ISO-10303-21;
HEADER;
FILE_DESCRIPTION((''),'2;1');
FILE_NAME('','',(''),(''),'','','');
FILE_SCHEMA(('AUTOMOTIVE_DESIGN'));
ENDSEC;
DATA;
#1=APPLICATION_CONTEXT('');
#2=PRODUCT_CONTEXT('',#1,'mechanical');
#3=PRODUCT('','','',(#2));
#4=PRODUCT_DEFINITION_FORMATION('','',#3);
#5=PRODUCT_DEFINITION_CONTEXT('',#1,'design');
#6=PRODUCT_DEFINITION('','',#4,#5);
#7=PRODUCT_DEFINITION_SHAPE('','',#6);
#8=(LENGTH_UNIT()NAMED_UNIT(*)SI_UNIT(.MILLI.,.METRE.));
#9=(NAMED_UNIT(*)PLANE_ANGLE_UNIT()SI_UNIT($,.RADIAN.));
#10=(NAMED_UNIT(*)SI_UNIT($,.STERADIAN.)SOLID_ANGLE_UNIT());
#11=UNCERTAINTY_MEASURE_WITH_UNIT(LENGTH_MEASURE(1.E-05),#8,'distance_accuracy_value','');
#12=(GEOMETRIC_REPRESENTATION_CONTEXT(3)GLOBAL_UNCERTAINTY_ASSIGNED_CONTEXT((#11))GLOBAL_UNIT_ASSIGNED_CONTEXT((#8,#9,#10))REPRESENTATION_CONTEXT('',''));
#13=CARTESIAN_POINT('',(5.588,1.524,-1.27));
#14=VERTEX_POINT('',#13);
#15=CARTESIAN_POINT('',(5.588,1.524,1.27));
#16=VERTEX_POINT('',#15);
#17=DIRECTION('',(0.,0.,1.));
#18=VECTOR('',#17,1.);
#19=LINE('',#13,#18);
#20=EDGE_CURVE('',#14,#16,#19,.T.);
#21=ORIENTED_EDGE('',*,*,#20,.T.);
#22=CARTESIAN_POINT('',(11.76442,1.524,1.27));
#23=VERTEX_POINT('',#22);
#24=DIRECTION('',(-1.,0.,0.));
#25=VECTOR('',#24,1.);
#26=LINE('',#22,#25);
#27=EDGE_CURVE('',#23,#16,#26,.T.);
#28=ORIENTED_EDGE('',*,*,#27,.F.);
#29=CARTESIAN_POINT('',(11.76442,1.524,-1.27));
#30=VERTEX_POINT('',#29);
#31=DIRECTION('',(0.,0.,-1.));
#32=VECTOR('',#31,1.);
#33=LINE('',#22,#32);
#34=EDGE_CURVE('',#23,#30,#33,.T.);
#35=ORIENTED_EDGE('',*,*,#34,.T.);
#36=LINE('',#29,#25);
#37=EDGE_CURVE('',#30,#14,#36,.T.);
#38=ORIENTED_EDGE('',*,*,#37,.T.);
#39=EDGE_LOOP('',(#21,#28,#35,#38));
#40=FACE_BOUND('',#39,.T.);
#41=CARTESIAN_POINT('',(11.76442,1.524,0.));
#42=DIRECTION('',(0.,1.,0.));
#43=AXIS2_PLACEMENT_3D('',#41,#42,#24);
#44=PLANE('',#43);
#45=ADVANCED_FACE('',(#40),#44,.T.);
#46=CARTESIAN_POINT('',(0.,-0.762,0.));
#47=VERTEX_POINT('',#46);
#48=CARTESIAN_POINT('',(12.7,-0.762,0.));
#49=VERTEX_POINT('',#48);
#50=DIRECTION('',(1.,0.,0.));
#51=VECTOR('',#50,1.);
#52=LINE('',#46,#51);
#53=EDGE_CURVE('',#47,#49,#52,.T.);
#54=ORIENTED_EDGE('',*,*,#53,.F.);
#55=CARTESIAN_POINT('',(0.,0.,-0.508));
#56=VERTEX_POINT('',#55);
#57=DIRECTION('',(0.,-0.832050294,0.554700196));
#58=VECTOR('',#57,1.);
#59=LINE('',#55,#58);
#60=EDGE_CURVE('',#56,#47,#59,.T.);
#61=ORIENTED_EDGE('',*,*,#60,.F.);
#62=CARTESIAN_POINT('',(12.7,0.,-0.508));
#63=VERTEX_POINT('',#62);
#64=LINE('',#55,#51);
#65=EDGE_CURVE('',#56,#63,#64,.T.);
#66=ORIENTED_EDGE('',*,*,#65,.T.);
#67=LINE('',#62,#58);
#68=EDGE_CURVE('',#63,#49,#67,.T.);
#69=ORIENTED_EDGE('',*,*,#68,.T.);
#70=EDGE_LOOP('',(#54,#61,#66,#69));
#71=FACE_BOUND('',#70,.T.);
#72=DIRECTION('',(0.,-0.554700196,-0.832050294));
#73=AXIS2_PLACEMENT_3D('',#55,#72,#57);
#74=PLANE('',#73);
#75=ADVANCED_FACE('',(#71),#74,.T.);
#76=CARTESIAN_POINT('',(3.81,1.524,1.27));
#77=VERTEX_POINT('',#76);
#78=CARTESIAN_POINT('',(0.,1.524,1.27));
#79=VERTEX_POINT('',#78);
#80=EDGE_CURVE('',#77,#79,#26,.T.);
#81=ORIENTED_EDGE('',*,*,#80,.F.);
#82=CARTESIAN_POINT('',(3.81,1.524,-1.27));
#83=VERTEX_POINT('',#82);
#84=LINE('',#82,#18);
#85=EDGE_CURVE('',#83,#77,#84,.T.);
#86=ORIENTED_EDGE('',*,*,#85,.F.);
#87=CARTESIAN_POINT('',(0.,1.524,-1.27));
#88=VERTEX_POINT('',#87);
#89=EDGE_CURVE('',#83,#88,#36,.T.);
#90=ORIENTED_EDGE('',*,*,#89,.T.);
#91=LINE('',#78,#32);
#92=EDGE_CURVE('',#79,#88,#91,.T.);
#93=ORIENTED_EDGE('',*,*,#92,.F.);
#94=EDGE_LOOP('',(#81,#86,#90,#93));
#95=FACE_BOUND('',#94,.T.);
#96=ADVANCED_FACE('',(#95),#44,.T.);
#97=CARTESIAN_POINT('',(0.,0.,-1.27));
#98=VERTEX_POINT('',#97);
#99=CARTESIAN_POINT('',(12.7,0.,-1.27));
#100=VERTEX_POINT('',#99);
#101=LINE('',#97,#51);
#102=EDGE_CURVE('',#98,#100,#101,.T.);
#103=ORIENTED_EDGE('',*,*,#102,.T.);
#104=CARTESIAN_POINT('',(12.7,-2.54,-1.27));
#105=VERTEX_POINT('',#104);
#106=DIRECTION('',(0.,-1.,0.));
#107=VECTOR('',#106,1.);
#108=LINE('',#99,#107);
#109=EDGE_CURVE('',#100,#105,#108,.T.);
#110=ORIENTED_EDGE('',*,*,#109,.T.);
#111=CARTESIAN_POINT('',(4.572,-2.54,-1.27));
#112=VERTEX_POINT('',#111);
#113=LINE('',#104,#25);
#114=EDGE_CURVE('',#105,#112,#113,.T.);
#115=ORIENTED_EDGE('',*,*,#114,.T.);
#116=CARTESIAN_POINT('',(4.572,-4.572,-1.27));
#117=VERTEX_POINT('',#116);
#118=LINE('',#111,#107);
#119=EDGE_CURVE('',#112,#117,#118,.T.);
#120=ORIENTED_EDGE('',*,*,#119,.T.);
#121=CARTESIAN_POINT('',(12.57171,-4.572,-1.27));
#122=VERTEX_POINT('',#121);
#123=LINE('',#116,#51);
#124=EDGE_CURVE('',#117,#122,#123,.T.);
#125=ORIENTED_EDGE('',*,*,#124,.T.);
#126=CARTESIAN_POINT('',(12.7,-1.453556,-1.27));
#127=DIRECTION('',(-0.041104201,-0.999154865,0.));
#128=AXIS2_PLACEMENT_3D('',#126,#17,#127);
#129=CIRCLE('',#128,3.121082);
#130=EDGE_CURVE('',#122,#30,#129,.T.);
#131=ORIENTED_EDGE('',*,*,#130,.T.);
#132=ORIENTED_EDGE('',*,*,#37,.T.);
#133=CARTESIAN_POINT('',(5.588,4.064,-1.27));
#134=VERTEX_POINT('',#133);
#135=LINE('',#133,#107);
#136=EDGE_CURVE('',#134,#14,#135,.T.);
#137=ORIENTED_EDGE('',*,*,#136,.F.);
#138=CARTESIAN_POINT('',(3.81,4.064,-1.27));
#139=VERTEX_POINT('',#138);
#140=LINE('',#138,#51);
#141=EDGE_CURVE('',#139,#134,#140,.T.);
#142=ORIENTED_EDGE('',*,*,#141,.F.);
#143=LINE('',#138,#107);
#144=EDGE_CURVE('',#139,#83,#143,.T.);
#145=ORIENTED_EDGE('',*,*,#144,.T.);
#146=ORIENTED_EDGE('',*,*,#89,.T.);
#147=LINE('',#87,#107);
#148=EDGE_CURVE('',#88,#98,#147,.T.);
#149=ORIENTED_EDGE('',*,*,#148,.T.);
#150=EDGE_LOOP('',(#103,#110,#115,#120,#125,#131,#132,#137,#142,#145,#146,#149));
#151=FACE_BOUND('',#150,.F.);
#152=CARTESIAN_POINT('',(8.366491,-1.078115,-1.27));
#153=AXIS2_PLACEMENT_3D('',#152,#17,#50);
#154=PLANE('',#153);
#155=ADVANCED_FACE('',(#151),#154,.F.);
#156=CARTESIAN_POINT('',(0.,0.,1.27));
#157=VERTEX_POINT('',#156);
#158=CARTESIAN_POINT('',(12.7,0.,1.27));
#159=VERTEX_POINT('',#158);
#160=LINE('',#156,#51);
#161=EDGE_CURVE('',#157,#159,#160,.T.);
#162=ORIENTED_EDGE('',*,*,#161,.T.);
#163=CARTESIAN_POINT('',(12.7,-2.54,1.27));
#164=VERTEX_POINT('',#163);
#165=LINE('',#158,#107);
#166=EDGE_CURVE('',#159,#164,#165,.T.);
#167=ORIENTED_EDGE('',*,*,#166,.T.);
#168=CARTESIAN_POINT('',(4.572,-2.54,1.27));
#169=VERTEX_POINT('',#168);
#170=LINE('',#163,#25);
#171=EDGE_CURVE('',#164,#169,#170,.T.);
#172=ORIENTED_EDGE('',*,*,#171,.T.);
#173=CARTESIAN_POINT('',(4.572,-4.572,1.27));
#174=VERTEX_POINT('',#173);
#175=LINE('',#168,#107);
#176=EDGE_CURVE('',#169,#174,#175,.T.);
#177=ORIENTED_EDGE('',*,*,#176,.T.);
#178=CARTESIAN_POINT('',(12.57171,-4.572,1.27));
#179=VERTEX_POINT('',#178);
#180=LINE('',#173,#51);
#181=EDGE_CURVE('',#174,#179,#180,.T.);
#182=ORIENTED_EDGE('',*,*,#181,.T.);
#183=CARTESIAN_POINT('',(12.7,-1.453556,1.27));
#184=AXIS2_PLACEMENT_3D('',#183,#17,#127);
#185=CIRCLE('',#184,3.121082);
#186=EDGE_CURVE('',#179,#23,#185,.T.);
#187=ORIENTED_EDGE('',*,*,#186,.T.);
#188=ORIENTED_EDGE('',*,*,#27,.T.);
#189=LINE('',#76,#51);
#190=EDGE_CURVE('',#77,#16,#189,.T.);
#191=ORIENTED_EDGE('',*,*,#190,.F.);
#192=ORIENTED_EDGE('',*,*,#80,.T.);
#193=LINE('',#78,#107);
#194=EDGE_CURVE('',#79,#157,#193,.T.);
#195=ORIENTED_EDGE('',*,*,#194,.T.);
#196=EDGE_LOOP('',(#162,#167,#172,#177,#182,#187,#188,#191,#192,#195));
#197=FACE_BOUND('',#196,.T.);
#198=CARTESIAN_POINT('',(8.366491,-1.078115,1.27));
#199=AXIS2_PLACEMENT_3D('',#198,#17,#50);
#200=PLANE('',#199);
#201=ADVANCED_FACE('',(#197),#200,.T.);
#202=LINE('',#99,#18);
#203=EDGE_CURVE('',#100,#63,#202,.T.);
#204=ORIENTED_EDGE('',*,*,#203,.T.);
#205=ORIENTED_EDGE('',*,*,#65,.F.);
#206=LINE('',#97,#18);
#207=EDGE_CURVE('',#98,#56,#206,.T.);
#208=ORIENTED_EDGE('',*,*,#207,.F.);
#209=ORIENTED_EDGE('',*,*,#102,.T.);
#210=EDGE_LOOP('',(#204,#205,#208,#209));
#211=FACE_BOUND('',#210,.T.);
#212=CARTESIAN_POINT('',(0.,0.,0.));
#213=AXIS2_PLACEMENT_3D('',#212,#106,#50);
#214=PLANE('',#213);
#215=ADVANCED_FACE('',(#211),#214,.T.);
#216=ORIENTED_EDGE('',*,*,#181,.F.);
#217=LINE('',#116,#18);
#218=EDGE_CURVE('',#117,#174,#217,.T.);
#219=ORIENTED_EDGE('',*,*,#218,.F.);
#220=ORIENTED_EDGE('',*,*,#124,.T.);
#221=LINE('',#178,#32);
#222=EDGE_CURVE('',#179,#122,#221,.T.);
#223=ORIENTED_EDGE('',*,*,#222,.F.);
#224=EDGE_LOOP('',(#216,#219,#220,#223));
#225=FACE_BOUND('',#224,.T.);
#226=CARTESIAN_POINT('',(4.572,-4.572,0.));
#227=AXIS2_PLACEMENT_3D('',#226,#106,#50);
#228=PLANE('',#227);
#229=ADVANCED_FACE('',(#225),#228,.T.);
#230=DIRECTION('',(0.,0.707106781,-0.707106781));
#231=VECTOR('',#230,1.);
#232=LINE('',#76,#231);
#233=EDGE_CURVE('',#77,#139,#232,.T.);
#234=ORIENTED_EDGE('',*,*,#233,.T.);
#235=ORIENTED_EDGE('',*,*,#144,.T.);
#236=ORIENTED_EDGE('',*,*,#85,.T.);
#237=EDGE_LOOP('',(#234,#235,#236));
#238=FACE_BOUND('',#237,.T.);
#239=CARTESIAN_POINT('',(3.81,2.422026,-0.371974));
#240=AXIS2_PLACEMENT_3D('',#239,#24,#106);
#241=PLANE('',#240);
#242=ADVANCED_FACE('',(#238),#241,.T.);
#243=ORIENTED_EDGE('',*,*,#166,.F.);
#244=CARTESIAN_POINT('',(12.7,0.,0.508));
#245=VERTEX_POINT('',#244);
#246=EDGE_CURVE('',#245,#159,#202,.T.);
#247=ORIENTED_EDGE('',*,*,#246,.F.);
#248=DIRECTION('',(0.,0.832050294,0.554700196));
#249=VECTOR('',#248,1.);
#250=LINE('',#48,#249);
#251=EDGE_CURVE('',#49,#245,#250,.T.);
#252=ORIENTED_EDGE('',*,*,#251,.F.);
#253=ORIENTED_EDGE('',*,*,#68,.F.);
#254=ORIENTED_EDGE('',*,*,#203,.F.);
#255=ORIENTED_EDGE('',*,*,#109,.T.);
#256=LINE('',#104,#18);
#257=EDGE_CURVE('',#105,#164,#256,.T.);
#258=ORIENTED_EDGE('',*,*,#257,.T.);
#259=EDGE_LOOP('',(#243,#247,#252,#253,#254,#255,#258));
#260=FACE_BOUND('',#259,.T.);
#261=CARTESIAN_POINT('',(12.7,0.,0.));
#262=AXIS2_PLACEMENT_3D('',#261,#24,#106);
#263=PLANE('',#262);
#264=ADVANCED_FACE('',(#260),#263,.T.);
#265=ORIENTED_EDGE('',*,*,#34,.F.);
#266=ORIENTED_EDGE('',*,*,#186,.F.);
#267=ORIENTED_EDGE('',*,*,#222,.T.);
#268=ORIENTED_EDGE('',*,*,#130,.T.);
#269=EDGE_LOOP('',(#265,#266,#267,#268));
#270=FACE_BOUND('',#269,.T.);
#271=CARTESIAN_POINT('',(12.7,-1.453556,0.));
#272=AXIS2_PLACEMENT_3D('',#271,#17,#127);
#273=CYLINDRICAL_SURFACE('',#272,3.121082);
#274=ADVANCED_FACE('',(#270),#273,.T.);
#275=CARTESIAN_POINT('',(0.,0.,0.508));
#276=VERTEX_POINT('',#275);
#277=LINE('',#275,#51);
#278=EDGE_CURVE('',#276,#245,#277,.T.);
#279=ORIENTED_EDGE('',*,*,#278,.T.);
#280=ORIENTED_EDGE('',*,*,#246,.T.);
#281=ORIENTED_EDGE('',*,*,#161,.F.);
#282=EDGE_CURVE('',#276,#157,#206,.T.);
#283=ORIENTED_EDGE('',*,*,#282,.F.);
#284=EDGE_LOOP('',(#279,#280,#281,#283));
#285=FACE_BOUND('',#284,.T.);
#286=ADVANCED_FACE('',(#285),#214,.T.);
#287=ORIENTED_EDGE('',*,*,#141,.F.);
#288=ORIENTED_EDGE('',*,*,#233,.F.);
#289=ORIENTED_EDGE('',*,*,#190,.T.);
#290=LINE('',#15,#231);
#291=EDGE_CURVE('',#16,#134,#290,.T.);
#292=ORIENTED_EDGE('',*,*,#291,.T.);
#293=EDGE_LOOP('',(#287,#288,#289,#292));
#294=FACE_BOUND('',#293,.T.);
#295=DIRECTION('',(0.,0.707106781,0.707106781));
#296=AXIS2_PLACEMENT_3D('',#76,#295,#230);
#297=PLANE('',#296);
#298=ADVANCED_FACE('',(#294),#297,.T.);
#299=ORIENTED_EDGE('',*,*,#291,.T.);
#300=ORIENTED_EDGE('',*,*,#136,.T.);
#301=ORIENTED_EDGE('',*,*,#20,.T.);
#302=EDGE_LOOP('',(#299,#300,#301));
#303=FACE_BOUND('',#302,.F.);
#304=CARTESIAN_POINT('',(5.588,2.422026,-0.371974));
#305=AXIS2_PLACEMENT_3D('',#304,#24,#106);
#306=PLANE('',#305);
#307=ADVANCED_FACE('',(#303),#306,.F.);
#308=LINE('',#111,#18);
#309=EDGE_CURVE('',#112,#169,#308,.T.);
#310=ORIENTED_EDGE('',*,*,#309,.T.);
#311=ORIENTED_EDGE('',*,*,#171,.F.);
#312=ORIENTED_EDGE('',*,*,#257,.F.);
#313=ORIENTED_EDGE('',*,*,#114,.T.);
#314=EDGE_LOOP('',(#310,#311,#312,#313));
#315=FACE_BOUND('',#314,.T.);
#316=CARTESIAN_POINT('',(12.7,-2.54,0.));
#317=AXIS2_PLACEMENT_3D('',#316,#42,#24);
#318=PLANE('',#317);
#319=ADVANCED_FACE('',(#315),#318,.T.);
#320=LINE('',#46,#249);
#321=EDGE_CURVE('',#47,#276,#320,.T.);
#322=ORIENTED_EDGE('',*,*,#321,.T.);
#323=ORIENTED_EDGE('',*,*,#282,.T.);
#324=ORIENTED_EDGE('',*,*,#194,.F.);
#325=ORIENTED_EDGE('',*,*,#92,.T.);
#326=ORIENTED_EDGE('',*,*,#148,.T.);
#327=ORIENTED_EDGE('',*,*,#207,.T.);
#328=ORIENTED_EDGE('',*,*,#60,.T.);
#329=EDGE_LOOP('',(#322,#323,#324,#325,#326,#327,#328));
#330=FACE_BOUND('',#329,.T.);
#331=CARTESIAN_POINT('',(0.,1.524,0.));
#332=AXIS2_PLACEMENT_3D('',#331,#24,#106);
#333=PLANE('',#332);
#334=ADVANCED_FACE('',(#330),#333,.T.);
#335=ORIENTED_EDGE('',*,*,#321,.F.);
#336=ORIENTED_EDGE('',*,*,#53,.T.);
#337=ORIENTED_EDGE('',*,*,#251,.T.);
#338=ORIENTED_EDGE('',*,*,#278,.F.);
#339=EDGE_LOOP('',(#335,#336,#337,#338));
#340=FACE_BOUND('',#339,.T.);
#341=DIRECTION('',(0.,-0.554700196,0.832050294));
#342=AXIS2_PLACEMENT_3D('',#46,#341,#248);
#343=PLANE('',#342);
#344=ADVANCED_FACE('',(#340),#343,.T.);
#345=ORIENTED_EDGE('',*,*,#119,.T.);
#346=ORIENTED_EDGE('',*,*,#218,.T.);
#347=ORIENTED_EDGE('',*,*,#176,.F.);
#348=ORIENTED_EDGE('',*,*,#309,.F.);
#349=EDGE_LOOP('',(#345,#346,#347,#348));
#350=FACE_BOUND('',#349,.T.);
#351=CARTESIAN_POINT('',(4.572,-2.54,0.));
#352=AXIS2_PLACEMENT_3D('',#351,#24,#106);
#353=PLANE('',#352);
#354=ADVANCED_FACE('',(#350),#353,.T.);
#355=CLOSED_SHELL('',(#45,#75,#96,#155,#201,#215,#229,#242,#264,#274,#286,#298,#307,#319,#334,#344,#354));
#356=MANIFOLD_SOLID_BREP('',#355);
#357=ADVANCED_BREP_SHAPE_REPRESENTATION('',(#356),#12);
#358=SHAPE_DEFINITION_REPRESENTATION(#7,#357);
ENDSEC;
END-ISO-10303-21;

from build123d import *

# Parameters (mm, degrees)
F1_DEPTH = 1.27
F3_DEPTH = 12.7
F6_DEPTH = 1.778


with BuildPart() as f1:
    # F0 (on Top) → F1 (new body, symmetric)
    with BuildSketch(Plane.XY):
        with BuildLine():
            Line((0, 1.524), (0, 0))
            Line((0, 0), (12.7, 0))
            Line((12.7, 0), (12.7, -2.54))
            Line((12.7, -2.54), (4.572, -2.54))
            Line((4.572, -2.54), (4.572, -4.572))
            Line((4.572, -4.572), (12.5717104354, -4.572))
            ThreePointArc((12.5717104354, -4.572), (15.7940682602, -1.0438103752), (11.7644204026, 1.524))
            Line((11.7644204026, 1.524), (0, 1.524))
        make_face()
    extrude(amount=F1_DEPTH, both=True)

    # F2 (on face) → F3 (join, through all)
    with BuildSketch(Plane(origin=(0, 0, 0), x_dir=(0, -1, 0), z_dir=(-1, 0, 0))):
        Polygon((0.762, 0), (0, 0.508), (0, -0.508), align=None)
    extrude(amount=-F3_DEPTH)

    # F5 (on face) → F6 (join)
    with BuildSketch(Plane(origin=(3.81, 0, 0), x_dir=(0, -1, 0), z_dir=(-1, 0, 0))):
        Polygon((-4.064, -1.27), (-1.524, -1.27), (-1.524, 1.27), align=None)
    extrude(amount=-F6_DEPTH)


solid = f1.part
